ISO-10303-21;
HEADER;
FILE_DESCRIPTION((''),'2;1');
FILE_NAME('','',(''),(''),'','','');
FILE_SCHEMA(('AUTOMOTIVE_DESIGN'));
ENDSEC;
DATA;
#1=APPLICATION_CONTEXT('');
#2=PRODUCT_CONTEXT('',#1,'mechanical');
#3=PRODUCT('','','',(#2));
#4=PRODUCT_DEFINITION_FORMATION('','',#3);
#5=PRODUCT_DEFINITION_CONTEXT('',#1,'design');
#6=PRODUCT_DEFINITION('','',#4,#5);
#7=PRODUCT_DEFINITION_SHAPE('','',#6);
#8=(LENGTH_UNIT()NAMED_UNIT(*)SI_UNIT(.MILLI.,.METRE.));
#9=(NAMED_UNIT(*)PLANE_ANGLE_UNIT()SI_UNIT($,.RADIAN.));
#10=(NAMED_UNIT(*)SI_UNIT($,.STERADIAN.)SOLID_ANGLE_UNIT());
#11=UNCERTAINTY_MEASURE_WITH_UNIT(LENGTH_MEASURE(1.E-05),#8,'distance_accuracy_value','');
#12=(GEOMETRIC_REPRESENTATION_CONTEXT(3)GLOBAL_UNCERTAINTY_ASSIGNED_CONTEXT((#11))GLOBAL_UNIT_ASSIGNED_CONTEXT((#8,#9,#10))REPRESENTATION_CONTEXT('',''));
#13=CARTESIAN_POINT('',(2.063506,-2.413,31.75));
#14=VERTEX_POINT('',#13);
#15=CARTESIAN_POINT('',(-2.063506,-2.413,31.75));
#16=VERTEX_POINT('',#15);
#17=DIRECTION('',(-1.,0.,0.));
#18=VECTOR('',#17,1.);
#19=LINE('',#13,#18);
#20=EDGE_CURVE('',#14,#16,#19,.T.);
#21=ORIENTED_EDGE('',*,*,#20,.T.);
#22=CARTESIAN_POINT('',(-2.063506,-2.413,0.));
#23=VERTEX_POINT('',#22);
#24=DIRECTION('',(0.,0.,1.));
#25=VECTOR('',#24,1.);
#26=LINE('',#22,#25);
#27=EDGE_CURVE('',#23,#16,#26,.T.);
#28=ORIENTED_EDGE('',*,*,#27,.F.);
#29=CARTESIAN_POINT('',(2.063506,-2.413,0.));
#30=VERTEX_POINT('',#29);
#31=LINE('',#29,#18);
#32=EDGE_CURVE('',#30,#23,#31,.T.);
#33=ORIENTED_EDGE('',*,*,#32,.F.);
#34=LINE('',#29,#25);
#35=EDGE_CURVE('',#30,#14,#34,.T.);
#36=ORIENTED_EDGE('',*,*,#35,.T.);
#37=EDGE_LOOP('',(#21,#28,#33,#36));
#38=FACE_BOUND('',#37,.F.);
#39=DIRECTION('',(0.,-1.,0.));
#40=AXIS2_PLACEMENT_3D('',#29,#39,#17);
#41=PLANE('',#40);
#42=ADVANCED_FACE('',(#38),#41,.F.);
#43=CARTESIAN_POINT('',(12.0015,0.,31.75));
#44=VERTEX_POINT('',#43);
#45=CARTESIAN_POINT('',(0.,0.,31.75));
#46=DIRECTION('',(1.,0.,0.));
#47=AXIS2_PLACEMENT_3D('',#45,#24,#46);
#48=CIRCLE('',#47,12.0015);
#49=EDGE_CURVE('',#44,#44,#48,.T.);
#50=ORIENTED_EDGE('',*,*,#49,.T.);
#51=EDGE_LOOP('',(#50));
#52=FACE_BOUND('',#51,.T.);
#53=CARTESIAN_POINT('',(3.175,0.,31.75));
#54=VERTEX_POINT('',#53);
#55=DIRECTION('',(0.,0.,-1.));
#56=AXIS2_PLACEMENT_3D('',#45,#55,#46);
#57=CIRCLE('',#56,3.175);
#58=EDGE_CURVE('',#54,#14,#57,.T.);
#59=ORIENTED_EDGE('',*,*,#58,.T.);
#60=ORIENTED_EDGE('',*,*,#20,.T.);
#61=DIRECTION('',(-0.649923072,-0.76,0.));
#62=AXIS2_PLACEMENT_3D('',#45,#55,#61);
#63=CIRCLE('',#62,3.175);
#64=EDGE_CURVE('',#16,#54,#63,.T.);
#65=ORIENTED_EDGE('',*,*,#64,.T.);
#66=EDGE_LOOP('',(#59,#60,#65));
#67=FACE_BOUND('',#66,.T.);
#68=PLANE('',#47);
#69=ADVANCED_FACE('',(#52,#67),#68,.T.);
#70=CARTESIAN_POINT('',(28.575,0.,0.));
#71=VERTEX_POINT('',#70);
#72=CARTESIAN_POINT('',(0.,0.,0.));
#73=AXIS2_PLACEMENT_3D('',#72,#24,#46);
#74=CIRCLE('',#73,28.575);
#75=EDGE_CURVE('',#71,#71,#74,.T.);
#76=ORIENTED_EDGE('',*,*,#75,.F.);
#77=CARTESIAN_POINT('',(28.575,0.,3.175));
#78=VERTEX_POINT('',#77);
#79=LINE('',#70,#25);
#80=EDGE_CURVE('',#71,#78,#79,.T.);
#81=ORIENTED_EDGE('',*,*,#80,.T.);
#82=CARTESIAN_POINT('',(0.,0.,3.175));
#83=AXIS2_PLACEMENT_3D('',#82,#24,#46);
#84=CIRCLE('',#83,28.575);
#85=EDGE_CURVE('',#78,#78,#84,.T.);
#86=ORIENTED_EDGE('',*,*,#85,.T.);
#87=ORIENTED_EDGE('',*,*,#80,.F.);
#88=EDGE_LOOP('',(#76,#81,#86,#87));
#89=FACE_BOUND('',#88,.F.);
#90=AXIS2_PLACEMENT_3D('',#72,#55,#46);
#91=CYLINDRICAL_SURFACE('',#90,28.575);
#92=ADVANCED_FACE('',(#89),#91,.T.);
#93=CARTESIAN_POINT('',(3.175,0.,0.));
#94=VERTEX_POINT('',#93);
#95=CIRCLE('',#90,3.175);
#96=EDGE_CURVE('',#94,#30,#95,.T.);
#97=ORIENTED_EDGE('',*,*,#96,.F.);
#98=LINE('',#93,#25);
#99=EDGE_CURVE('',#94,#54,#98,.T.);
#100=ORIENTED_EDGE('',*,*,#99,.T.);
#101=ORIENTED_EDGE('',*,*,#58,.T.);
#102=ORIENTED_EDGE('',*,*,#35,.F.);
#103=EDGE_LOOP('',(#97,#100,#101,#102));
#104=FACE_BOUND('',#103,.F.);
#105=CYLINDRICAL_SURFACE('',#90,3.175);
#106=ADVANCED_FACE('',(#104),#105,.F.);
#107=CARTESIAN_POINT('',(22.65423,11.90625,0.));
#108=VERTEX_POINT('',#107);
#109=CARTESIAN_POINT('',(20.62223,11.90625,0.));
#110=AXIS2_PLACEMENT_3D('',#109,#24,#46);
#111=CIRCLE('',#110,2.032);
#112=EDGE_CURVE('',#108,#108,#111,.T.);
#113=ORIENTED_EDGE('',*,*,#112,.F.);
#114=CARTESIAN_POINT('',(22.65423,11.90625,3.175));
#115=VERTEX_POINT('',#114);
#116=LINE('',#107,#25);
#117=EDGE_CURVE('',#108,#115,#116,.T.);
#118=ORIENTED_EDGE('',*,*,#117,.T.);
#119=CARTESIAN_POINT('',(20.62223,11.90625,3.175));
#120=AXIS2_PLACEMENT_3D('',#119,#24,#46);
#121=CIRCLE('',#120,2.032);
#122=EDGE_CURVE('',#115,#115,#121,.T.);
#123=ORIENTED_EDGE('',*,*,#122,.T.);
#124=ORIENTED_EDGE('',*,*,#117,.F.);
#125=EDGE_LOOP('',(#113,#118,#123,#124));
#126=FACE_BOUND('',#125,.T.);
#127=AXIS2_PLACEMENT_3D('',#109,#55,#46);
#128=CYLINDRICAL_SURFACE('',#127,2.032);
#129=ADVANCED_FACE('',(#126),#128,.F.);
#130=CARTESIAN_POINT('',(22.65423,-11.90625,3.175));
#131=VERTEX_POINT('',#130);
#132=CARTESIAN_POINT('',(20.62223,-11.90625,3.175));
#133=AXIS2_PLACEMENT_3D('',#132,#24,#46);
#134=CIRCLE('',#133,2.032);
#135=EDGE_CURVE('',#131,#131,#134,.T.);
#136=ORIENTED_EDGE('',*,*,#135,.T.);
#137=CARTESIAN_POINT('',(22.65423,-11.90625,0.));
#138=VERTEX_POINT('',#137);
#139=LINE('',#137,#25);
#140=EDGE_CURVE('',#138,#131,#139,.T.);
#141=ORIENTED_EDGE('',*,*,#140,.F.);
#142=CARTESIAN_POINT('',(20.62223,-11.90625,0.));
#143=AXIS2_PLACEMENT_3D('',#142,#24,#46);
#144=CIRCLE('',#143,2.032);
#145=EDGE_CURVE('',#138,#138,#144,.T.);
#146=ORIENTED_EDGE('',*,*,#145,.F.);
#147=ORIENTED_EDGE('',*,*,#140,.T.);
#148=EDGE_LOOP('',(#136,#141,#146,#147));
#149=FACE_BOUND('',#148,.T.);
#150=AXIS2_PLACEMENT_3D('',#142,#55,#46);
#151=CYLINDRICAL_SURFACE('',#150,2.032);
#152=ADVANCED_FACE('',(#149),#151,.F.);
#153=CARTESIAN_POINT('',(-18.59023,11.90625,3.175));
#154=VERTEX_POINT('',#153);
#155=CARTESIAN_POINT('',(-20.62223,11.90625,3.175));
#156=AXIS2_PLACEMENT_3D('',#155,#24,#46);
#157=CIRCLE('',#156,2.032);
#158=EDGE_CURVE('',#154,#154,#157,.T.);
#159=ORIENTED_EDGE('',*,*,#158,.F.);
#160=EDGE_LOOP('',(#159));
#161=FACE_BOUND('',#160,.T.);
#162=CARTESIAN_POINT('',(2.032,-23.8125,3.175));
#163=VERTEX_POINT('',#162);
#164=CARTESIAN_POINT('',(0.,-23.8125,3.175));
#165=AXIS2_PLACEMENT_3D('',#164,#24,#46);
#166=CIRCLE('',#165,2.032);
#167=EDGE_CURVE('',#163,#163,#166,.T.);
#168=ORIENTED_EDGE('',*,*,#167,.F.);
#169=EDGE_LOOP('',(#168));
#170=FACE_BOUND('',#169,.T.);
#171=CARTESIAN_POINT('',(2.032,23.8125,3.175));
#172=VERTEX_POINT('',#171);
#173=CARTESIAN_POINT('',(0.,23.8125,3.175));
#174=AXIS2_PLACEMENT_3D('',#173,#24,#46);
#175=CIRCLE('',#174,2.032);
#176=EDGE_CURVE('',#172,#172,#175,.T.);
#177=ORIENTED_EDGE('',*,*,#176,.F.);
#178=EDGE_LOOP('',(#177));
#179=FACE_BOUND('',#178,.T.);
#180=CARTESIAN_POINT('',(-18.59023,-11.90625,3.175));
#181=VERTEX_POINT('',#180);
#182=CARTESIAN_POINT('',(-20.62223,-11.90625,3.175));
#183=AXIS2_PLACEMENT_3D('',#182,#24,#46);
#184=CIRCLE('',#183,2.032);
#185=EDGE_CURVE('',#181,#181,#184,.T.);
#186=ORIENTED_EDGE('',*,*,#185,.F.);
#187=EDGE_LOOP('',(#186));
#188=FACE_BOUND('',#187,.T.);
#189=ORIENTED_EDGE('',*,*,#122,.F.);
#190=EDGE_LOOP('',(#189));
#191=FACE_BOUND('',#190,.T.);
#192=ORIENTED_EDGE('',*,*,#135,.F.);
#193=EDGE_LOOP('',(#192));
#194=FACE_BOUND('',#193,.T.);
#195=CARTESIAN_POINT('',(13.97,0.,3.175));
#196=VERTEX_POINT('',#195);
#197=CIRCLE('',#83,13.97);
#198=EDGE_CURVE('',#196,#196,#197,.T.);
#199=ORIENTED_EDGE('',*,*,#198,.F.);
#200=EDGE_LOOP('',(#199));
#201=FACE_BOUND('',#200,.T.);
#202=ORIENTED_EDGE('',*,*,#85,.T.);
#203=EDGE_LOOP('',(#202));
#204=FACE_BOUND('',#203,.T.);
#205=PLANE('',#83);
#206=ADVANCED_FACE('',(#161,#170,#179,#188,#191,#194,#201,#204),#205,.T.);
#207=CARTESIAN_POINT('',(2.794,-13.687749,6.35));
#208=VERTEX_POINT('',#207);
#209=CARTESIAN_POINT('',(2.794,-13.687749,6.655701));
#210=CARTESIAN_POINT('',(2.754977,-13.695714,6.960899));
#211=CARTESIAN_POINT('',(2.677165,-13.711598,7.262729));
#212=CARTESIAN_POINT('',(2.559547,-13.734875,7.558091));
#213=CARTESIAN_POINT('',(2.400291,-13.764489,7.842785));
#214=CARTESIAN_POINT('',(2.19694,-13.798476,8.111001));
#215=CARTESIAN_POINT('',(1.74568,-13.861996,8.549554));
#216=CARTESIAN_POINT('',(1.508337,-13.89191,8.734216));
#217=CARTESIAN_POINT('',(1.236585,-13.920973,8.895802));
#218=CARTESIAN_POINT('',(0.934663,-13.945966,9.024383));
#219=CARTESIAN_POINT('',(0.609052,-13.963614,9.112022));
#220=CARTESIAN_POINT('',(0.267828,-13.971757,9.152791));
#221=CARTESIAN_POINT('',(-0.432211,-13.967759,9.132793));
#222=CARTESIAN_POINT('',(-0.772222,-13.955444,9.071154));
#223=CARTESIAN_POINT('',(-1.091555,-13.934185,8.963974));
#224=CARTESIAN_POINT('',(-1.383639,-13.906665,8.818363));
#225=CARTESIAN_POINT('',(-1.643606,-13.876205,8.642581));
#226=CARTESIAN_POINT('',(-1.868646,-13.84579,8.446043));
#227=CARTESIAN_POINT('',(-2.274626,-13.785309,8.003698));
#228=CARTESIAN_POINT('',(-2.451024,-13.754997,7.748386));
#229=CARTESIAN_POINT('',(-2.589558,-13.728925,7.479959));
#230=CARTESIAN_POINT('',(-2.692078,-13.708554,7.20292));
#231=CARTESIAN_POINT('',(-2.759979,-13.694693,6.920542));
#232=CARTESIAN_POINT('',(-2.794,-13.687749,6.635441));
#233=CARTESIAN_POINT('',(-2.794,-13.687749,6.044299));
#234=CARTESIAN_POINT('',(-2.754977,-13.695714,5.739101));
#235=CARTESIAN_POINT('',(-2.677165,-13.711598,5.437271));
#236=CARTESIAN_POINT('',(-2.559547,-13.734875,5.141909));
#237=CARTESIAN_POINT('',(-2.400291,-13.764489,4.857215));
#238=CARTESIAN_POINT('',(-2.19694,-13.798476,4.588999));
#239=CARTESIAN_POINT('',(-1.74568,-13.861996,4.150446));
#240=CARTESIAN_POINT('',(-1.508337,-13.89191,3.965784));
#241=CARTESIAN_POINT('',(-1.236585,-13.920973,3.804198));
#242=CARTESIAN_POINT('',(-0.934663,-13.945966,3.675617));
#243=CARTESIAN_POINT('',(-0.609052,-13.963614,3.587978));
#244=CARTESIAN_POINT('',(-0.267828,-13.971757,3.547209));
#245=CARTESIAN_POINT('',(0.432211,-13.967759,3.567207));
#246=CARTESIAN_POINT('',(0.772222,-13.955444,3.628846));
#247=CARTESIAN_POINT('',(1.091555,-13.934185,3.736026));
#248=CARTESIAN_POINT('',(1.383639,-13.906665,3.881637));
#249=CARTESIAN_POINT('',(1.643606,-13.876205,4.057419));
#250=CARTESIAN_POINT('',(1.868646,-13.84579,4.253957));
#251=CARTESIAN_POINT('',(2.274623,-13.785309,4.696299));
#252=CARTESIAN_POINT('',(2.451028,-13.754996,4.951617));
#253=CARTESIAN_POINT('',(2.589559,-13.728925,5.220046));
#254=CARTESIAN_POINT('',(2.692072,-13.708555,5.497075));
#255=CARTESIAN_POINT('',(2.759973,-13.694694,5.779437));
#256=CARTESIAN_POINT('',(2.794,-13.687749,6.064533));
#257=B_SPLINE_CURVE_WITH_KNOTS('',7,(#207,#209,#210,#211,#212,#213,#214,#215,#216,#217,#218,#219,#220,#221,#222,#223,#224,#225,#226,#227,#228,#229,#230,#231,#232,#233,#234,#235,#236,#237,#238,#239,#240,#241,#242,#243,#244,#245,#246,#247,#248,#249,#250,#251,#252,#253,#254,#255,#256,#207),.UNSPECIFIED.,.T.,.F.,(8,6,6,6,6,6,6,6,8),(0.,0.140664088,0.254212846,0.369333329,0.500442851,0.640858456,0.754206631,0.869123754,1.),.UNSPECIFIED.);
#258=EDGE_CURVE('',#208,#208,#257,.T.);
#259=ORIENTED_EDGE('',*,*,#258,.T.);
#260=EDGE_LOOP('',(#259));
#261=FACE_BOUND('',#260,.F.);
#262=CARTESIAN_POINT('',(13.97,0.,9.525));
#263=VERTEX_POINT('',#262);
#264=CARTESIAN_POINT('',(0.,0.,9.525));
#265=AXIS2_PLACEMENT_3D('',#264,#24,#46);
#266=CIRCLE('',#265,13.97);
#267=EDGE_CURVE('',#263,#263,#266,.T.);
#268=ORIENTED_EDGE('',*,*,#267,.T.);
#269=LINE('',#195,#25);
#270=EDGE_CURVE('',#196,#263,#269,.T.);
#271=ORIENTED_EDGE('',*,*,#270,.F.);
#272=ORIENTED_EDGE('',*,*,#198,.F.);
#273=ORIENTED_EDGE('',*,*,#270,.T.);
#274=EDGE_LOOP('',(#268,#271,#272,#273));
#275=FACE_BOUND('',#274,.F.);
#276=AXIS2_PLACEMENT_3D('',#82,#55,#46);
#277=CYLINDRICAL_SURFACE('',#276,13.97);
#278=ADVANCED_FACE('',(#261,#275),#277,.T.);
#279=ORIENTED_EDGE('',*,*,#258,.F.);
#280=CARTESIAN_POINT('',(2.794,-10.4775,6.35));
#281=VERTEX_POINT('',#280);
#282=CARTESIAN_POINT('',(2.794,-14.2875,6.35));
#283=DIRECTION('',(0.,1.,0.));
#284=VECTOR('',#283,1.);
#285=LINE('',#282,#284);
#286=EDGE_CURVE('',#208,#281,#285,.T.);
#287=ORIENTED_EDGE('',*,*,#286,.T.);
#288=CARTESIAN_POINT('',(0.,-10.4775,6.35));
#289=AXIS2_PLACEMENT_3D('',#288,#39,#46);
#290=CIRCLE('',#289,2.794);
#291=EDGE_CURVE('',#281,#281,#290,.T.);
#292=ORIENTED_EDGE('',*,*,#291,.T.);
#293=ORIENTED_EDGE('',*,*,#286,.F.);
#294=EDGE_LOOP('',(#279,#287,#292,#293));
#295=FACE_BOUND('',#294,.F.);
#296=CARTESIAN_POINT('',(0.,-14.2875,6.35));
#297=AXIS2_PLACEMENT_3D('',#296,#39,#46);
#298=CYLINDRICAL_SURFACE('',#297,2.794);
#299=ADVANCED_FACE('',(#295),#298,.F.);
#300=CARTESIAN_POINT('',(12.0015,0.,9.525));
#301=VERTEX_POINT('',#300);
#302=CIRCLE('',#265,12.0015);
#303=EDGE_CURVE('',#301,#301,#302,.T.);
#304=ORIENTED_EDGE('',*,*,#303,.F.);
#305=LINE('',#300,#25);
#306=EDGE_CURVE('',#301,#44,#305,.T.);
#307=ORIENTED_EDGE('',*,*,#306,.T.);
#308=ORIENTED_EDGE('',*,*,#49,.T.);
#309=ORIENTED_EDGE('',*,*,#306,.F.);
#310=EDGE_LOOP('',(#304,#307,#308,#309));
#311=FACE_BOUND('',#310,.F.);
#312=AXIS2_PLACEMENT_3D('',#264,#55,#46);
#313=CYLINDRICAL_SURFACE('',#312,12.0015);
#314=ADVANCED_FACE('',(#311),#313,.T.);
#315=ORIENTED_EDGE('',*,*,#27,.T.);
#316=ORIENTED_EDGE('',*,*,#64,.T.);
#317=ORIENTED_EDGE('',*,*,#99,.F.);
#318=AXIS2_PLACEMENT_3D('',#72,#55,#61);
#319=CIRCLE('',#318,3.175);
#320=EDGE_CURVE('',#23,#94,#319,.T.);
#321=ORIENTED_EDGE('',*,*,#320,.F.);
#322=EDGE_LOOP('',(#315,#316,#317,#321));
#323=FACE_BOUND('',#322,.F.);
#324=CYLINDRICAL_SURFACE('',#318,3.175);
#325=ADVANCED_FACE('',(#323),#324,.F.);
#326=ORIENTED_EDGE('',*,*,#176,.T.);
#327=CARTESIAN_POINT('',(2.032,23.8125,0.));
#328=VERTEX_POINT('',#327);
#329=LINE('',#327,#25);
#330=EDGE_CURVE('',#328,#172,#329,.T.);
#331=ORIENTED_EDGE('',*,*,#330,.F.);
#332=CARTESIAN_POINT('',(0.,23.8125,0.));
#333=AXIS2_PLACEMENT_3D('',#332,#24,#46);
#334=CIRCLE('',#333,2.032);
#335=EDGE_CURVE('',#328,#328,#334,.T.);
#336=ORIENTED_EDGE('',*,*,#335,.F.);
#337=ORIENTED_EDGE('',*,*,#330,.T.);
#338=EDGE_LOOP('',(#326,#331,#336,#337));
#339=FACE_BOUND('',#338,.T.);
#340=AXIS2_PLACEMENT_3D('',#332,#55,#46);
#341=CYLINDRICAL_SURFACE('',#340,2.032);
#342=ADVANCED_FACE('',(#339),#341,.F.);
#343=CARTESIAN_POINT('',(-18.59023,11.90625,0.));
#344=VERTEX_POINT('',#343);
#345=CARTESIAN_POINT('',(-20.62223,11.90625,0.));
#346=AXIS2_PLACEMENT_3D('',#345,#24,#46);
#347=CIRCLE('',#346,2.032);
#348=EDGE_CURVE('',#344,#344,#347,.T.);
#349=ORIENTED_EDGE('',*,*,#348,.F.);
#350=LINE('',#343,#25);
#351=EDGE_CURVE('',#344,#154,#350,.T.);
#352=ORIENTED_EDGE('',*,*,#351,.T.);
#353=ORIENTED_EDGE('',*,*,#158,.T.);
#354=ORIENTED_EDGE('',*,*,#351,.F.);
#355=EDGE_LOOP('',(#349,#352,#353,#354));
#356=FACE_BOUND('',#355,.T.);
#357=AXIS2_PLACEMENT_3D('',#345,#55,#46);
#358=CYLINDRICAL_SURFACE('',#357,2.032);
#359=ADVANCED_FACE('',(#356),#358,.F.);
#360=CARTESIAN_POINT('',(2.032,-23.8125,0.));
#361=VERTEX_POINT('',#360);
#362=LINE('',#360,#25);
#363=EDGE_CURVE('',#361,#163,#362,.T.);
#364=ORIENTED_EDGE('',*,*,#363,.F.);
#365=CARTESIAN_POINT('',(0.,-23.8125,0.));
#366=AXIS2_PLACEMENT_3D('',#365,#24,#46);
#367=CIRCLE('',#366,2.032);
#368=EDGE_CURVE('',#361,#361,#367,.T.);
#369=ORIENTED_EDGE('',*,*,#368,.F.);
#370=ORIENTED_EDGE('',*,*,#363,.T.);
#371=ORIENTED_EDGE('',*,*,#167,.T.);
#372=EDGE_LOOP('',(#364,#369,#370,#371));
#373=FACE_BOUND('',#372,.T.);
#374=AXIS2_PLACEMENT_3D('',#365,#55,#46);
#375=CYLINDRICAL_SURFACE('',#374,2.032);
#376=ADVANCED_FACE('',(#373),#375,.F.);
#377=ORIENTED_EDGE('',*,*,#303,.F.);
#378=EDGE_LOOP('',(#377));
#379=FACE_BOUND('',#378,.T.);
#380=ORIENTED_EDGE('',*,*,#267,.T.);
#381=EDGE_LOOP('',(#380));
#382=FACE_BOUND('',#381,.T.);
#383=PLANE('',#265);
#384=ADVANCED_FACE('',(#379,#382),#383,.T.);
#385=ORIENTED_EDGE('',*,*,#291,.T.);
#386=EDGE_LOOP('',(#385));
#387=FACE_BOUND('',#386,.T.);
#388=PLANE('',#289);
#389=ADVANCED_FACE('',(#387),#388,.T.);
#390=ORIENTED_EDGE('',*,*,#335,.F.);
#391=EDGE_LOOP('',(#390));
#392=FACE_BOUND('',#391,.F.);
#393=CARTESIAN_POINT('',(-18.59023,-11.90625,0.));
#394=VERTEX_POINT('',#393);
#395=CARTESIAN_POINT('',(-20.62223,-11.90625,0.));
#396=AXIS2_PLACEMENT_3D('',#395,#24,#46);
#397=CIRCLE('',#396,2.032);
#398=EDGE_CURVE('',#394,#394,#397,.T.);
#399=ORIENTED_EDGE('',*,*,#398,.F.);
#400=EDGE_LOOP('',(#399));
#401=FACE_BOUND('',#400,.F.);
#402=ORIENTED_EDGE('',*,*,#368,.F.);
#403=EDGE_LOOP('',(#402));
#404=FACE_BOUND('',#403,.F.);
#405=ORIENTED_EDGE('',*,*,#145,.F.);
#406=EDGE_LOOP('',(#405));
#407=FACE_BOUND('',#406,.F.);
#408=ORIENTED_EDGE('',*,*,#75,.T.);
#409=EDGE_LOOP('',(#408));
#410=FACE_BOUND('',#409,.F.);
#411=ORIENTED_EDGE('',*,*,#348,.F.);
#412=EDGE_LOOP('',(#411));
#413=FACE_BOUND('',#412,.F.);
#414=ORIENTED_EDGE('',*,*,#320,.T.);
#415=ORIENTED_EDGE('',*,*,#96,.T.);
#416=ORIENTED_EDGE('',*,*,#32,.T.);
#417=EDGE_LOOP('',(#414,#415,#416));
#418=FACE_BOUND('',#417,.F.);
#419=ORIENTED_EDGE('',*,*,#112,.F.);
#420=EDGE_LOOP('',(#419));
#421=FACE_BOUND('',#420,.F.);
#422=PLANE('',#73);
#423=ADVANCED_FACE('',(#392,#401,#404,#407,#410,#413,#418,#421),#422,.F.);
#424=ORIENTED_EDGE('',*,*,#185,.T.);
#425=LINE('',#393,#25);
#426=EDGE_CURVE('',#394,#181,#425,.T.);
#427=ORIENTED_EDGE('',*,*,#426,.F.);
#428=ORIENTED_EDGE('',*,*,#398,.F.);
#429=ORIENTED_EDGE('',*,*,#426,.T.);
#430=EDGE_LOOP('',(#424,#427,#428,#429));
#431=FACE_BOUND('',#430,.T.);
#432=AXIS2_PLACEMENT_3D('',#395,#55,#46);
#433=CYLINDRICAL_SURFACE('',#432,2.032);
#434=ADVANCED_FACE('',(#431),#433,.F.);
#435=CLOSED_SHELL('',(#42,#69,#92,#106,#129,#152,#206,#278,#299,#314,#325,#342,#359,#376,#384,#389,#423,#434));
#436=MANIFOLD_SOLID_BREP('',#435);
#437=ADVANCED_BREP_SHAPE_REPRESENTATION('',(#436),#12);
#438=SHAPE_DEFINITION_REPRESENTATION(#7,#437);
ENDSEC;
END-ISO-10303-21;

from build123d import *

# Parameters (mm, degrees)
F0_R      = 28.575
F0_R_2    = 2.032
F1_DEPTH  = 3.175
F2_R      = 13.97
F3_DEPTH  = 6.35
F4_R      = 12.0015
F5_DEPTH  = 22.225
F7_DEPTH  = 31.75
F9_R      = 1.4224
F10_DEPTH = 0.3175
F11_R     = 2.794
F12_DEPTH = 3.81


with BuildPart() as f1:
    # F0 (on Top) → F1 (new body)
    with BuildSketch(Plane.XY):
        Circle(F0_R)
        with Locations((-20.6222299276, -11.90625)):
            Circle(F0_R_2, mode=Mode.SUBTRACT)
        with Locations((0, -23.8125)):
            Circle(F0_R_2, mode=Mode.SUBTRACT)
        with Locations((20.6222299276, -11.90625)):
            Circle(F0_R_2, mode=Mode.SUBTRACT)
        with Locations((-20.6222299276, 11.90625)):
            Circle(F0_R_2, mode=Mode.SUBTRACT)
        with Locations((20.6222299276, 11.90625)):
            Circle(F0_R_2, mode=Mode.SUBTRACT)
        with Locations((0, 23.8125)):
            Circle(F0_R_2, mode=Mode.SUBTRACT)
    extrude(amount=F1_DEPTH)

    # F2 (on face) → F3 (join)
    with BuildSketch(Plane.XY.offset(3.175)):
        Circle(F2_R)
    extrude(amount=F3_DEPTH)

    # F4 (on face) → F5 (join)
    with BuildSketch(Plane.XY.offset(9.525)):
        Circle(F4_R)
    extrude(amount=F5_DEPTH)

    # F6 (on face) → F7 (cut, through all)
    with BuildSketch(Plane(origin=(0, 0, 0), x_dir=(1, 0, 0), z_dir=(0, 0, -1))):
        with BuildLine():
            ThreePointArc((-2.0635057548, 2.413), (-1.3283437485, -2.8837697352), (3.175, 0))
            ThreePointArc((3.175, 0), (2.8837697352, 1.3283437485), (2.0635057548, 2.413))
            Line((2.0635057548, 2.413), (0, 2.413))
            Line((0, 2.413), (-2.0635057548, 2.413))
        make_face()
    extrude(amount=-F7_DEPTH, mode=Mode.SUBTRACT)

    # F9 (on offset) → F10 (cut, through all)
    with BuildSketch(Plane.XZ.offset(14.2875)):
        with Locations((0, 6.35)):
            Circle(F9_R)
    extrude(amount=-F10_DEPTH, mode=Mode.SUBTRACT)

    # F11 (on offset) → F12 (cut)
    with BuildSketch(Plane.XZ.offset(14.2875)):
        with Locations((0, 6.35)):
            Circle(F11_R)
    extrude(amount=-F12_DEPTH, mode=Mode.SUBTRACT)


solid = f1.part
